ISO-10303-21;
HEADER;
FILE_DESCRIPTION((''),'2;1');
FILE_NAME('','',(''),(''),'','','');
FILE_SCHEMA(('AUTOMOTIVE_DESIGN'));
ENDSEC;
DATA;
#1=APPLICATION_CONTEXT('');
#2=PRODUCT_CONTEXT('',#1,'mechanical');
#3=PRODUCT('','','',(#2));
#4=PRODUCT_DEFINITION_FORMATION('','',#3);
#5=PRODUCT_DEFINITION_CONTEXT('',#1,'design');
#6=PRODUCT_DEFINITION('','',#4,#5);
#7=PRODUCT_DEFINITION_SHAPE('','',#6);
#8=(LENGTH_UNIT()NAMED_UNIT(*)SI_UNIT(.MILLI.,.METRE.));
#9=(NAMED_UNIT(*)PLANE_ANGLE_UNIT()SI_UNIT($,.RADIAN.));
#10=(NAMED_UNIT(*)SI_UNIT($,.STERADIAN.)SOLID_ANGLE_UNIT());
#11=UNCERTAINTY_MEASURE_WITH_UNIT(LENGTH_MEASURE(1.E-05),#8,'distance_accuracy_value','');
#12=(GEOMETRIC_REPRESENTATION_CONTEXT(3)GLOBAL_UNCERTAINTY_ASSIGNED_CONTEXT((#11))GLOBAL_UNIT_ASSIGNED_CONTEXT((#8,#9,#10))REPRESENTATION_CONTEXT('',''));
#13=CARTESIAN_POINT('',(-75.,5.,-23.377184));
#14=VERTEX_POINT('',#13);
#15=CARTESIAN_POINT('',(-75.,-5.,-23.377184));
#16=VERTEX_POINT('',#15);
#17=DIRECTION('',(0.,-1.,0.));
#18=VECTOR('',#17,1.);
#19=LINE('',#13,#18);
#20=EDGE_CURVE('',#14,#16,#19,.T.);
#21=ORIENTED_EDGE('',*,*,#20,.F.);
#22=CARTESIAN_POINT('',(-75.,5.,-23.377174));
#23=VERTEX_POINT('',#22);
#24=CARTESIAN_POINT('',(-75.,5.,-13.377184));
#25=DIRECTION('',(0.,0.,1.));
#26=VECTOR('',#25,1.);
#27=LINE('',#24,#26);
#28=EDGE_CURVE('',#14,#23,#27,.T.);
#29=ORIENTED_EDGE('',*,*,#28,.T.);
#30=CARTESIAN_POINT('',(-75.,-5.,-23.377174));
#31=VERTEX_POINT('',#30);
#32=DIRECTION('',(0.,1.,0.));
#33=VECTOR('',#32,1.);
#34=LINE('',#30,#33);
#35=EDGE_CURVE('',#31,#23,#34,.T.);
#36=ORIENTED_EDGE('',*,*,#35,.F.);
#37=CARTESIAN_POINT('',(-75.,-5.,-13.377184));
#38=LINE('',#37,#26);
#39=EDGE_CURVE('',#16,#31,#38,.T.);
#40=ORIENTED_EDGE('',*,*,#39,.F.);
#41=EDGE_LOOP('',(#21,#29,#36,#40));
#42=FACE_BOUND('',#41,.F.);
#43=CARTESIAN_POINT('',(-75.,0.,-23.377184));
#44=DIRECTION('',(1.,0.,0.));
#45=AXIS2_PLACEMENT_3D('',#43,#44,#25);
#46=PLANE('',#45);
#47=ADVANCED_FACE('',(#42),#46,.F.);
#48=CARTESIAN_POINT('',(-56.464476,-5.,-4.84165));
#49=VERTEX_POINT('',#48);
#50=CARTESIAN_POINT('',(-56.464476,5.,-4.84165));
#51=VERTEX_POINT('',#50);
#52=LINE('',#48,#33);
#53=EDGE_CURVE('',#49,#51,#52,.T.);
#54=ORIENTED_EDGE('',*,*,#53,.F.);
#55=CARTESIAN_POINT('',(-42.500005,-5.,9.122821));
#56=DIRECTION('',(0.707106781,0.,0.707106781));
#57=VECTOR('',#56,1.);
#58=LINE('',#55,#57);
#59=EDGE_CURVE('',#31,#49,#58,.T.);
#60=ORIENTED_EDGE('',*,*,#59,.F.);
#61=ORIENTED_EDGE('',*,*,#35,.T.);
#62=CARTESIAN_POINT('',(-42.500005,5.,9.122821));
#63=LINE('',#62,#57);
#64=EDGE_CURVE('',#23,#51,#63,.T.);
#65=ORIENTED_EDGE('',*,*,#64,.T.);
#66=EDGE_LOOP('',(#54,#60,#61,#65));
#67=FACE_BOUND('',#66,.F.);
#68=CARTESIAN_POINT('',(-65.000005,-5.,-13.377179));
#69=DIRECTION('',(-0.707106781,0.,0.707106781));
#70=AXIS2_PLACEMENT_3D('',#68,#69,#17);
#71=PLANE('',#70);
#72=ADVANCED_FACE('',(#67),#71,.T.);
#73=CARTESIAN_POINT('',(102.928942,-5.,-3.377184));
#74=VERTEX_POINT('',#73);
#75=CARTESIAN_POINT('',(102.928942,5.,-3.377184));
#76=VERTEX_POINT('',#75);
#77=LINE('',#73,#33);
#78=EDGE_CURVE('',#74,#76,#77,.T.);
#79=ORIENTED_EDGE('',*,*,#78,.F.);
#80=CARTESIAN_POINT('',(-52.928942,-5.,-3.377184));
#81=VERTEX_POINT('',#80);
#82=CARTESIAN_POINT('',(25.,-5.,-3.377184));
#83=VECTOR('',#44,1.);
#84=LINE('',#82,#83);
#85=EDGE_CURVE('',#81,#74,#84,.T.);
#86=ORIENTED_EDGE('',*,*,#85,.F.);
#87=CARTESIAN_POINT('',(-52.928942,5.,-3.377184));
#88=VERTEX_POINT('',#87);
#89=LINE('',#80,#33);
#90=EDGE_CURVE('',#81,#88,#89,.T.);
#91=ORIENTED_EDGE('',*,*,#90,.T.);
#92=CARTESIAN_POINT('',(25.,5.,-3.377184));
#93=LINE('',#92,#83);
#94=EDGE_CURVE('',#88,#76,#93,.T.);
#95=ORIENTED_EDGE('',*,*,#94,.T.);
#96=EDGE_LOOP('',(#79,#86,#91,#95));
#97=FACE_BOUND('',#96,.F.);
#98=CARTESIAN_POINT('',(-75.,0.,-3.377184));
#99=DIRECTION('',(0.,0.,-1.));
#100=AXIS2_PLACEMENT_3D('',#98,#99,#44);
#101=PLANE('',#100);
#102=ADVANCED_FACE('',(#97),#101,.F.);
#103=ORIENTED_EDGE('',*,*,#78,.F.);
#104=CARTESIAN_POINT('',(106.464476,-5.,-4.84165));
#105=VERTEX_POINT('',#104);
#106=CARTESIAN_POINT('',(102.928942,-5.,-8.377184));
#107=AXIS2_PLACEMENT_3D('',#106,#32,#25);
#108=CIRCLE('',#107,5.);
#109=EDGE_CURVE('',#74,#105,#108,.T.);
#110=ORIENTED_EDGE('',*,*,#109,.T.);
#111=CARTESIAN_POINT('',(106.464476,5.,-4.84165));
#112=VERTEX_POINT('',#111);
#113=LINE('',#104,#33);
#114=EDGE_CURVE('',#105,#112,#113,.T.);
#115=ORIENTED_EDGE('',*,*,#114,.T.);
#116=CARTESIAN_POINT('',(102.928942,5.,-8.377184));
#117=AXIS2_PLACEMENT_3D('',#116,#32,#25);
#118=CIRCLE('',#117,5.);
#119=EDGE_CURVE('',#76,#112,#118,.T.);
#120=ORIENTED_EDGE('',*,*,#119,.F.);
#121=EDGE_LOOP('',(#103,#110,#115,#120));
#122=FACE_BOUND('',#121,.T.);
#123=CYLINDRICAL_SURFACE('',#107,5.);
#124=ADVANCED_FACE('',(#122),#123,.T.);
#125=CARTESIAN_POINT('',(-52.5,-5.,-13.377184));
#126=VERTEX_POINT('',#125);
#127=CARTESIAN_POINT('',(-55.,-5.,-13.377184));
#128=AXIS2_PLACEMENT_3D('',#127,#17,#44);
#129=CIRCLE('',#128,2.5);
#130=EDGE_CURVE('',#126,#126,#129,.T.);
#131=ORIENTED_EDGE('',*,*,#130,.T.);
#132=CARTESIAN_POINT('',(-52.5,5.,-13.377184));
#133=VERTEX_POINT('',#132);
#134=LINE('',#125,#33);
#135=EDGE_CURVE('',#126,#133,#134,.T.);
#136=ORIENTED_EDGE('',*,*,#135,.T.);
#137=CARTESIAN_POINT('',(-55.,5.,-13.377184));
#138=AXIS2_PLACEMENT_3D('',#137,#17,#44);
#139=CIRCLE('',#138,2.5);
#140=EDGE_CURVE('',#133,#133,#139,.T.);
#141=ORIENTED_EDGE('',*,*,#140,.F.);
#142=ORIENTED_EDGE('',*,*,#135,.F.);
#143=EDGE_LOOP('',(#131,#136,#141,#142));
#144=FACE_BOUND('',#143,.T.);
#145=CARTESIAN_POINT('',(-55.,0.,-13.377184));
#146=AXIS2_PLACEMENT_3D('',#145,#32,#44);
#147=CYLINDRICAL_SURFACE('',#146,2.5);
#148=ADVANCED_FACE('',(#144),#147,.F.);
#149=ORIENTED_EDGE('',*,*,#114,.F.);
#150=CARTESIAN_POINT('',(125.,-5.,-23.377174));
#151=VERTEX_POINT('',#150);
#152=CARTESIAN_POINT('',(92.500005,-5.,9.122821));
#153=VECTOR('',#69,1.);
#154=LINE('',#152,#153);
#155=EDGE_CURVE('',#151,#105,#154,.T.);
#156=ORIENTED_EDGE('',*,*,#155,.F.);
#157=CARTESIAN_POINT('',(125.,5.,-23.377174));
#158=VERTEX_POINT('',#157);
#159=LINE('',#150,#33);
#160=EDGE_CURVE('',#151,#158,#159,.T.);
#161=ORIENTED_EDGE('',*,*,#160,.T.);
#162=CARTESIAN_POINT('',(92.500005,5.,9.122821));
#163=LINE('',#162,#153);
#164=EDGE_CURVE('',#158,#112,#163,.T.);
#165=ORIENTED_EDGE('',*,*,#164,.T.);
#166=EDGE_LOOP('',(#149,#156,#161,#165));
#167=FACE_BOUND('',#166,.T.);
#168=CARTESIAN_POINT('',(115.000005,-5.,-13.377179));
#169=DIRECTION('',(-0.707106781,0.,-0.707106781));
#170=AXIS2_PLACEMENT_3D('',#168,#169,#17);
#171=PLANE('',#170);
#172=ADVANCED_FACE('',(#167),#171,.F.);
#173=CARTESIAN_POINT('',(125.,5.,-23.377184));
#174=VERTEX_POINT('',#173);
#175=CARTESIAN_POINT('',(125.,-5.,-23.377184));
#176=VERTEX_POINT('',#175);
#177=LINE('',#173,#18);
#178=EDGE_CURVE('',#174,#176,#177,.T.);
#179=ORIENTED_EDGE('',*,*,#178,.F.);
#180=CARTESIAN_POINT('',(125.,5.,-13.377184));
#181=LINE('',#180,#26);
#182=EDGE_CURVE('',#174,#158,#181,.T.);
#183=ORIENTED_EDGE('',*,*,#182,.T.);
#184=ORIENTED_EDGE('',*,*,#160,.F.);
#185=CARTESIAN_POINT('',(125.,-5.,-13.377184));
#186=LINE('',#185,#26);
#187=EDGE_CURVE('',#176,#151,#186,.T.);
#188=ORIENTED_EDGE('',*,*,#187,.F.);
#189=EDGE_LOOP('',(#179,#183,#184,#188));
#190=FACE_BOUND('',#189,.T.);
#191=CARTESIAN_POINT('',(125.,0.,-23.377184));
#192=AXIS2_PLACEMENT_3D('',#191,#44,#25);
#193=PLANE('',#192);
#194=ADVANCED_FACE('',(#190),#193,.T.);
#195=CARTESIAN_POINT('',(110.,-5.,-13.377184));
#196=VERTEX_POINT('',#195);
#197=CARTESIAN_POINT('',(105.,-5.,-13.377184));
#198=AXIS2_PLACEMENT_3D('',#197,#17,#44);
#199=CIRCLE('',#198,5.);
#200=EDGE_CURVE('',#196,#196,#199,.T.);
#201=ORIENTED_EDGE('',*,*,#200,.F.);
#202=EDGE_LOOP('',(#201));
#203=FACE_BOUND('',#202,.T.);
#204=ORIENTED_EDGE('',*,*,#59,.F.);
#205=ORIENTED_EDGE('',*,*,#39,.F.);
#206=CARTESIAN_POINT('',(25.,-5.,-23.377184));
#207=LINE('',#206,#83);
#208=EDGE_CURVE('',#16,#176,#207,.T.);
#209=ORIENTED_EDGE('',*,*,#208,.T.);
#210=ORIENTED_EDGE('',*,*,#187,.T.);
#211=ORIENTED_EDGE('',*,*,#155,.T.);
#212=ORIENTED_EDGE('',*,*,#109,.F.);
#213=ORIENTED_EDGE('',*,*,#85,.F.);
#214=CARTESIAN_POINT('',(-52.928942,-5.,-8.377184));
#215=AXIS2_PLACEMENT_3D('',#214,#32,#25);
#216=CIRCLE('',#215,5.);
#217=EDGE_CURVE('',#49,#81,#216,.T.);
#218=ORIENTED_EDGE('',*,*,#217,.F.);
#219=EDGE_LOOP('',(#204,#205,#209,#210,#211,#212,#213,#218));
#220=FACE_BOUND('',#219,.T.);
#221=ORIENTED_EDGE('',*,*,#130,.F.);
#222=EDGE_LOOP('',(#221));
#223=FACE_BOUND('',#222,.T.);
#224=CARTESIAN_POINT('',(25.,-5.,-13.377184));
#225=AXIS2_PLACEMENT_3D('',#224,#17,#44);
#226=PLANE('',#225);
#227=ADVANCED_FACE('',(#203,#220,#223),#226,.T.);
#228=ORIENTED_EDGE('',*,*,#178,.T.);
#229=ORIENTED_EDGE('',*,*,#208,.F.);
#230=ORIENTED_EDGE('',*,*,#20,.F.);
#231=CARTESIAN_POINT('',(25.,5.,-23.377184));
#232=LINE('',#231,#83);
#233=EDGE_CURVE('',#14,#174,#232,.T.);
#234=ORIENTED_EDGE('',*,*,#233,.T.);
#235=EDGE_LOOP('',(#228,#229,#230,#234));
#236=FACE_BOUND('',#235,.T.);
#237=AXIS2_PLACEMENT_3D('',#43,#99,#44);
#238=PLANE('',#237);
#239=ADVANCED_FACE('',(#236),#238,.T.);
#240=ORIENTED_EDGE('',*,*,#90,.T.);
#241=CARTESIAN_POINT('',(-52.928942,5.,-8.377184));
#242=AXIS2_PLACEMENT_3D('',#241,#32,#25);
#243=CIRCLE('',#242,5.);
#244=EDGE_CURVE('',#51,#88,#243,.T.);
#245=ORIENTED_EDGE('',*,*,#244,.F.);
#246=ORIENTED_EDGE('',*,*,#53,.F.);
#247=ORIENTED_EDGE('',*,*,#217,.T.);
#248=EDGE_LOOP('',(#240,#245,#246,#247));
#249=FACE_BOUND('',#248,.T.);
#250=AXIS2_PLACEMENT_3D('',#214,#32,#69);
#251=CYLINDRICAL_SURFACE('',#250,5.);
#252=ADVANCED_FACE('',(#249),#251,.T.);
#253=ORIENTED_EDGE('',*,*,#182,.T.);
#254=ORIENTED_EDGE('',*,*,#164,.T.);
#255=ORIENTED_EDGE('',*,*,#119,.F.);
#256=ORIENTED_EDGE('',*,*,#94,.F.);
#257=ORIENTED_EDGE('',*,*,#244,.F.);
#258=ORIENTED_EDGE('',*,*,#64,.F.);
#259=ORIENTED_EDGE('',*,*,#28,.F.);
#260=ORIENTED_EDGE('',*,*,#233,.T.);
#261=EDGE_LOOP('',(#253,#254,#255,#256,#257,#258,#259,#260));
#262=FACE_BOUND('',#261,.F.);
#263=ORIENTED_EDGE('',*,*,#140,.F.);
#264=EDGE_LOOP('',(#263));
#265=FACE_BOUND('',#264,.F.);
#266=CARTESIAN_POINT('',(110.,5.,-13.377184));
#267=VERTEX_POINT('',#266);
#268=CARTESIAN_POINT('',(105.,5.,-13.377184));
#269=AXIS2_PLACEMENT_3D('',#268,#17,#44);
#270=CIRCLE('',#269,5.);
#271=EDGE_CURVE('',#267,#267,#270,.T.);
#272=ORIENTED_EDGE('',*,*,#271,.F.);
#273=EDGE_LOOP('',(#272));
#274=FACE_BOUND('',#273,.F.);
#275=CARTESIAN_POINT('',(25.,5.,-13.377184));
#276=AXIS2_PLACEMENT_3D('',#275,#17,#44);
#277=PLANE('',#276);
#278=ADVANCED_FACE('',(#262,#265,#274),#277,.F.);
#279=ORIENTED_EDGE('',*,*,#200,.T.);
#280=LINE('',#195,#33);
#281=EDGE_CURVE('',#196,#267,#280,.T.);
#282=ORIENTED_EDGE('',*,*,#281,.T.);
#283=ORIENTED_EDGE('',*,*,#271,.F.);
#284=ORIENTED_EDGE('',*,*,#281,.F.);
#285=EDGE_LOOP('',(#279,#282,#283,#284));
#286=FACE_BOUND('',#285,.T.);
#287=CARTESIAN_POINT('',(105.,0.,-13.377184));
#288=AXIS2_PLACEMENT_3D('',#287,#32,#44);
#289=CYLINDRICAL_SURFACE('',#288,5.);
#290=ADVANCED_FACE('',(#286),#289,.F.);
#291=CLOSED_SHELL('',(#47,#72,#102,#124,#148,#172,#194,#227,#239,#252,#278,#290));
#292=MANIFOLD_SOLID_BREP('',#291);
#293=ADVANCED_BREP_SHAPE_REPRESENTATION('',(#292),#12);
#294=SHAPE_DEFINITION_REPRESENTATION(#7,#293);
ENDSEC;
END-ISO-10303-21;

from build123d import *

# Parameters (mm, degrees)
F0_W     = 200
F0_H     = 20
F0_R     = 2.5
F0_R_2   = 5
F1_DEPTH = 5
F2_SIZE  = 19.99999
F3_R     = 5


# Not quite as in the source:
# - a fillet or chamfer is up to 0.001 mm smaller than in the source, because OpenCascade refuses the exact size


with BuildPart() as f1:
    # F0 (on Front) → F1 (new body, symmetric)
    with BuildSketch(Plane.XZ):
        with Locations((25, -13.3771840364)):
            Rectangle(F0_W, F0_H)
        with Locations((-55, -13.3771840364)):
            Circle(F0_R, mode=Mode.SUBTRACT)
        with Locations((105, -13.3771840364)):
            Circle(F0_R_2, mode=Mode.SUBTRACT)
    extrude(amount=F1_DEPTH, both=True)

    # F2 (size 20 in the source; OpenCascade refuses exactly that, so slightly less here)
    f2_edges = [f1.edges().sort_by_distance(p)[0] for p in [
        (-75, 0, -3.377184),
        (125, 0, -3.377184),
    ]]
    chamfer(f2_edges, length=F2_SIZE)

    # F3
    f3_edges = [f1.edges().sort_by_distance(p)[0] for p in [
        (-55.00001, 0, -3.377184),
        (105.00001, 0, -3.377184),
    ]]
    fillet(f3_edges, radius=F3_R)


solid = f1.part
